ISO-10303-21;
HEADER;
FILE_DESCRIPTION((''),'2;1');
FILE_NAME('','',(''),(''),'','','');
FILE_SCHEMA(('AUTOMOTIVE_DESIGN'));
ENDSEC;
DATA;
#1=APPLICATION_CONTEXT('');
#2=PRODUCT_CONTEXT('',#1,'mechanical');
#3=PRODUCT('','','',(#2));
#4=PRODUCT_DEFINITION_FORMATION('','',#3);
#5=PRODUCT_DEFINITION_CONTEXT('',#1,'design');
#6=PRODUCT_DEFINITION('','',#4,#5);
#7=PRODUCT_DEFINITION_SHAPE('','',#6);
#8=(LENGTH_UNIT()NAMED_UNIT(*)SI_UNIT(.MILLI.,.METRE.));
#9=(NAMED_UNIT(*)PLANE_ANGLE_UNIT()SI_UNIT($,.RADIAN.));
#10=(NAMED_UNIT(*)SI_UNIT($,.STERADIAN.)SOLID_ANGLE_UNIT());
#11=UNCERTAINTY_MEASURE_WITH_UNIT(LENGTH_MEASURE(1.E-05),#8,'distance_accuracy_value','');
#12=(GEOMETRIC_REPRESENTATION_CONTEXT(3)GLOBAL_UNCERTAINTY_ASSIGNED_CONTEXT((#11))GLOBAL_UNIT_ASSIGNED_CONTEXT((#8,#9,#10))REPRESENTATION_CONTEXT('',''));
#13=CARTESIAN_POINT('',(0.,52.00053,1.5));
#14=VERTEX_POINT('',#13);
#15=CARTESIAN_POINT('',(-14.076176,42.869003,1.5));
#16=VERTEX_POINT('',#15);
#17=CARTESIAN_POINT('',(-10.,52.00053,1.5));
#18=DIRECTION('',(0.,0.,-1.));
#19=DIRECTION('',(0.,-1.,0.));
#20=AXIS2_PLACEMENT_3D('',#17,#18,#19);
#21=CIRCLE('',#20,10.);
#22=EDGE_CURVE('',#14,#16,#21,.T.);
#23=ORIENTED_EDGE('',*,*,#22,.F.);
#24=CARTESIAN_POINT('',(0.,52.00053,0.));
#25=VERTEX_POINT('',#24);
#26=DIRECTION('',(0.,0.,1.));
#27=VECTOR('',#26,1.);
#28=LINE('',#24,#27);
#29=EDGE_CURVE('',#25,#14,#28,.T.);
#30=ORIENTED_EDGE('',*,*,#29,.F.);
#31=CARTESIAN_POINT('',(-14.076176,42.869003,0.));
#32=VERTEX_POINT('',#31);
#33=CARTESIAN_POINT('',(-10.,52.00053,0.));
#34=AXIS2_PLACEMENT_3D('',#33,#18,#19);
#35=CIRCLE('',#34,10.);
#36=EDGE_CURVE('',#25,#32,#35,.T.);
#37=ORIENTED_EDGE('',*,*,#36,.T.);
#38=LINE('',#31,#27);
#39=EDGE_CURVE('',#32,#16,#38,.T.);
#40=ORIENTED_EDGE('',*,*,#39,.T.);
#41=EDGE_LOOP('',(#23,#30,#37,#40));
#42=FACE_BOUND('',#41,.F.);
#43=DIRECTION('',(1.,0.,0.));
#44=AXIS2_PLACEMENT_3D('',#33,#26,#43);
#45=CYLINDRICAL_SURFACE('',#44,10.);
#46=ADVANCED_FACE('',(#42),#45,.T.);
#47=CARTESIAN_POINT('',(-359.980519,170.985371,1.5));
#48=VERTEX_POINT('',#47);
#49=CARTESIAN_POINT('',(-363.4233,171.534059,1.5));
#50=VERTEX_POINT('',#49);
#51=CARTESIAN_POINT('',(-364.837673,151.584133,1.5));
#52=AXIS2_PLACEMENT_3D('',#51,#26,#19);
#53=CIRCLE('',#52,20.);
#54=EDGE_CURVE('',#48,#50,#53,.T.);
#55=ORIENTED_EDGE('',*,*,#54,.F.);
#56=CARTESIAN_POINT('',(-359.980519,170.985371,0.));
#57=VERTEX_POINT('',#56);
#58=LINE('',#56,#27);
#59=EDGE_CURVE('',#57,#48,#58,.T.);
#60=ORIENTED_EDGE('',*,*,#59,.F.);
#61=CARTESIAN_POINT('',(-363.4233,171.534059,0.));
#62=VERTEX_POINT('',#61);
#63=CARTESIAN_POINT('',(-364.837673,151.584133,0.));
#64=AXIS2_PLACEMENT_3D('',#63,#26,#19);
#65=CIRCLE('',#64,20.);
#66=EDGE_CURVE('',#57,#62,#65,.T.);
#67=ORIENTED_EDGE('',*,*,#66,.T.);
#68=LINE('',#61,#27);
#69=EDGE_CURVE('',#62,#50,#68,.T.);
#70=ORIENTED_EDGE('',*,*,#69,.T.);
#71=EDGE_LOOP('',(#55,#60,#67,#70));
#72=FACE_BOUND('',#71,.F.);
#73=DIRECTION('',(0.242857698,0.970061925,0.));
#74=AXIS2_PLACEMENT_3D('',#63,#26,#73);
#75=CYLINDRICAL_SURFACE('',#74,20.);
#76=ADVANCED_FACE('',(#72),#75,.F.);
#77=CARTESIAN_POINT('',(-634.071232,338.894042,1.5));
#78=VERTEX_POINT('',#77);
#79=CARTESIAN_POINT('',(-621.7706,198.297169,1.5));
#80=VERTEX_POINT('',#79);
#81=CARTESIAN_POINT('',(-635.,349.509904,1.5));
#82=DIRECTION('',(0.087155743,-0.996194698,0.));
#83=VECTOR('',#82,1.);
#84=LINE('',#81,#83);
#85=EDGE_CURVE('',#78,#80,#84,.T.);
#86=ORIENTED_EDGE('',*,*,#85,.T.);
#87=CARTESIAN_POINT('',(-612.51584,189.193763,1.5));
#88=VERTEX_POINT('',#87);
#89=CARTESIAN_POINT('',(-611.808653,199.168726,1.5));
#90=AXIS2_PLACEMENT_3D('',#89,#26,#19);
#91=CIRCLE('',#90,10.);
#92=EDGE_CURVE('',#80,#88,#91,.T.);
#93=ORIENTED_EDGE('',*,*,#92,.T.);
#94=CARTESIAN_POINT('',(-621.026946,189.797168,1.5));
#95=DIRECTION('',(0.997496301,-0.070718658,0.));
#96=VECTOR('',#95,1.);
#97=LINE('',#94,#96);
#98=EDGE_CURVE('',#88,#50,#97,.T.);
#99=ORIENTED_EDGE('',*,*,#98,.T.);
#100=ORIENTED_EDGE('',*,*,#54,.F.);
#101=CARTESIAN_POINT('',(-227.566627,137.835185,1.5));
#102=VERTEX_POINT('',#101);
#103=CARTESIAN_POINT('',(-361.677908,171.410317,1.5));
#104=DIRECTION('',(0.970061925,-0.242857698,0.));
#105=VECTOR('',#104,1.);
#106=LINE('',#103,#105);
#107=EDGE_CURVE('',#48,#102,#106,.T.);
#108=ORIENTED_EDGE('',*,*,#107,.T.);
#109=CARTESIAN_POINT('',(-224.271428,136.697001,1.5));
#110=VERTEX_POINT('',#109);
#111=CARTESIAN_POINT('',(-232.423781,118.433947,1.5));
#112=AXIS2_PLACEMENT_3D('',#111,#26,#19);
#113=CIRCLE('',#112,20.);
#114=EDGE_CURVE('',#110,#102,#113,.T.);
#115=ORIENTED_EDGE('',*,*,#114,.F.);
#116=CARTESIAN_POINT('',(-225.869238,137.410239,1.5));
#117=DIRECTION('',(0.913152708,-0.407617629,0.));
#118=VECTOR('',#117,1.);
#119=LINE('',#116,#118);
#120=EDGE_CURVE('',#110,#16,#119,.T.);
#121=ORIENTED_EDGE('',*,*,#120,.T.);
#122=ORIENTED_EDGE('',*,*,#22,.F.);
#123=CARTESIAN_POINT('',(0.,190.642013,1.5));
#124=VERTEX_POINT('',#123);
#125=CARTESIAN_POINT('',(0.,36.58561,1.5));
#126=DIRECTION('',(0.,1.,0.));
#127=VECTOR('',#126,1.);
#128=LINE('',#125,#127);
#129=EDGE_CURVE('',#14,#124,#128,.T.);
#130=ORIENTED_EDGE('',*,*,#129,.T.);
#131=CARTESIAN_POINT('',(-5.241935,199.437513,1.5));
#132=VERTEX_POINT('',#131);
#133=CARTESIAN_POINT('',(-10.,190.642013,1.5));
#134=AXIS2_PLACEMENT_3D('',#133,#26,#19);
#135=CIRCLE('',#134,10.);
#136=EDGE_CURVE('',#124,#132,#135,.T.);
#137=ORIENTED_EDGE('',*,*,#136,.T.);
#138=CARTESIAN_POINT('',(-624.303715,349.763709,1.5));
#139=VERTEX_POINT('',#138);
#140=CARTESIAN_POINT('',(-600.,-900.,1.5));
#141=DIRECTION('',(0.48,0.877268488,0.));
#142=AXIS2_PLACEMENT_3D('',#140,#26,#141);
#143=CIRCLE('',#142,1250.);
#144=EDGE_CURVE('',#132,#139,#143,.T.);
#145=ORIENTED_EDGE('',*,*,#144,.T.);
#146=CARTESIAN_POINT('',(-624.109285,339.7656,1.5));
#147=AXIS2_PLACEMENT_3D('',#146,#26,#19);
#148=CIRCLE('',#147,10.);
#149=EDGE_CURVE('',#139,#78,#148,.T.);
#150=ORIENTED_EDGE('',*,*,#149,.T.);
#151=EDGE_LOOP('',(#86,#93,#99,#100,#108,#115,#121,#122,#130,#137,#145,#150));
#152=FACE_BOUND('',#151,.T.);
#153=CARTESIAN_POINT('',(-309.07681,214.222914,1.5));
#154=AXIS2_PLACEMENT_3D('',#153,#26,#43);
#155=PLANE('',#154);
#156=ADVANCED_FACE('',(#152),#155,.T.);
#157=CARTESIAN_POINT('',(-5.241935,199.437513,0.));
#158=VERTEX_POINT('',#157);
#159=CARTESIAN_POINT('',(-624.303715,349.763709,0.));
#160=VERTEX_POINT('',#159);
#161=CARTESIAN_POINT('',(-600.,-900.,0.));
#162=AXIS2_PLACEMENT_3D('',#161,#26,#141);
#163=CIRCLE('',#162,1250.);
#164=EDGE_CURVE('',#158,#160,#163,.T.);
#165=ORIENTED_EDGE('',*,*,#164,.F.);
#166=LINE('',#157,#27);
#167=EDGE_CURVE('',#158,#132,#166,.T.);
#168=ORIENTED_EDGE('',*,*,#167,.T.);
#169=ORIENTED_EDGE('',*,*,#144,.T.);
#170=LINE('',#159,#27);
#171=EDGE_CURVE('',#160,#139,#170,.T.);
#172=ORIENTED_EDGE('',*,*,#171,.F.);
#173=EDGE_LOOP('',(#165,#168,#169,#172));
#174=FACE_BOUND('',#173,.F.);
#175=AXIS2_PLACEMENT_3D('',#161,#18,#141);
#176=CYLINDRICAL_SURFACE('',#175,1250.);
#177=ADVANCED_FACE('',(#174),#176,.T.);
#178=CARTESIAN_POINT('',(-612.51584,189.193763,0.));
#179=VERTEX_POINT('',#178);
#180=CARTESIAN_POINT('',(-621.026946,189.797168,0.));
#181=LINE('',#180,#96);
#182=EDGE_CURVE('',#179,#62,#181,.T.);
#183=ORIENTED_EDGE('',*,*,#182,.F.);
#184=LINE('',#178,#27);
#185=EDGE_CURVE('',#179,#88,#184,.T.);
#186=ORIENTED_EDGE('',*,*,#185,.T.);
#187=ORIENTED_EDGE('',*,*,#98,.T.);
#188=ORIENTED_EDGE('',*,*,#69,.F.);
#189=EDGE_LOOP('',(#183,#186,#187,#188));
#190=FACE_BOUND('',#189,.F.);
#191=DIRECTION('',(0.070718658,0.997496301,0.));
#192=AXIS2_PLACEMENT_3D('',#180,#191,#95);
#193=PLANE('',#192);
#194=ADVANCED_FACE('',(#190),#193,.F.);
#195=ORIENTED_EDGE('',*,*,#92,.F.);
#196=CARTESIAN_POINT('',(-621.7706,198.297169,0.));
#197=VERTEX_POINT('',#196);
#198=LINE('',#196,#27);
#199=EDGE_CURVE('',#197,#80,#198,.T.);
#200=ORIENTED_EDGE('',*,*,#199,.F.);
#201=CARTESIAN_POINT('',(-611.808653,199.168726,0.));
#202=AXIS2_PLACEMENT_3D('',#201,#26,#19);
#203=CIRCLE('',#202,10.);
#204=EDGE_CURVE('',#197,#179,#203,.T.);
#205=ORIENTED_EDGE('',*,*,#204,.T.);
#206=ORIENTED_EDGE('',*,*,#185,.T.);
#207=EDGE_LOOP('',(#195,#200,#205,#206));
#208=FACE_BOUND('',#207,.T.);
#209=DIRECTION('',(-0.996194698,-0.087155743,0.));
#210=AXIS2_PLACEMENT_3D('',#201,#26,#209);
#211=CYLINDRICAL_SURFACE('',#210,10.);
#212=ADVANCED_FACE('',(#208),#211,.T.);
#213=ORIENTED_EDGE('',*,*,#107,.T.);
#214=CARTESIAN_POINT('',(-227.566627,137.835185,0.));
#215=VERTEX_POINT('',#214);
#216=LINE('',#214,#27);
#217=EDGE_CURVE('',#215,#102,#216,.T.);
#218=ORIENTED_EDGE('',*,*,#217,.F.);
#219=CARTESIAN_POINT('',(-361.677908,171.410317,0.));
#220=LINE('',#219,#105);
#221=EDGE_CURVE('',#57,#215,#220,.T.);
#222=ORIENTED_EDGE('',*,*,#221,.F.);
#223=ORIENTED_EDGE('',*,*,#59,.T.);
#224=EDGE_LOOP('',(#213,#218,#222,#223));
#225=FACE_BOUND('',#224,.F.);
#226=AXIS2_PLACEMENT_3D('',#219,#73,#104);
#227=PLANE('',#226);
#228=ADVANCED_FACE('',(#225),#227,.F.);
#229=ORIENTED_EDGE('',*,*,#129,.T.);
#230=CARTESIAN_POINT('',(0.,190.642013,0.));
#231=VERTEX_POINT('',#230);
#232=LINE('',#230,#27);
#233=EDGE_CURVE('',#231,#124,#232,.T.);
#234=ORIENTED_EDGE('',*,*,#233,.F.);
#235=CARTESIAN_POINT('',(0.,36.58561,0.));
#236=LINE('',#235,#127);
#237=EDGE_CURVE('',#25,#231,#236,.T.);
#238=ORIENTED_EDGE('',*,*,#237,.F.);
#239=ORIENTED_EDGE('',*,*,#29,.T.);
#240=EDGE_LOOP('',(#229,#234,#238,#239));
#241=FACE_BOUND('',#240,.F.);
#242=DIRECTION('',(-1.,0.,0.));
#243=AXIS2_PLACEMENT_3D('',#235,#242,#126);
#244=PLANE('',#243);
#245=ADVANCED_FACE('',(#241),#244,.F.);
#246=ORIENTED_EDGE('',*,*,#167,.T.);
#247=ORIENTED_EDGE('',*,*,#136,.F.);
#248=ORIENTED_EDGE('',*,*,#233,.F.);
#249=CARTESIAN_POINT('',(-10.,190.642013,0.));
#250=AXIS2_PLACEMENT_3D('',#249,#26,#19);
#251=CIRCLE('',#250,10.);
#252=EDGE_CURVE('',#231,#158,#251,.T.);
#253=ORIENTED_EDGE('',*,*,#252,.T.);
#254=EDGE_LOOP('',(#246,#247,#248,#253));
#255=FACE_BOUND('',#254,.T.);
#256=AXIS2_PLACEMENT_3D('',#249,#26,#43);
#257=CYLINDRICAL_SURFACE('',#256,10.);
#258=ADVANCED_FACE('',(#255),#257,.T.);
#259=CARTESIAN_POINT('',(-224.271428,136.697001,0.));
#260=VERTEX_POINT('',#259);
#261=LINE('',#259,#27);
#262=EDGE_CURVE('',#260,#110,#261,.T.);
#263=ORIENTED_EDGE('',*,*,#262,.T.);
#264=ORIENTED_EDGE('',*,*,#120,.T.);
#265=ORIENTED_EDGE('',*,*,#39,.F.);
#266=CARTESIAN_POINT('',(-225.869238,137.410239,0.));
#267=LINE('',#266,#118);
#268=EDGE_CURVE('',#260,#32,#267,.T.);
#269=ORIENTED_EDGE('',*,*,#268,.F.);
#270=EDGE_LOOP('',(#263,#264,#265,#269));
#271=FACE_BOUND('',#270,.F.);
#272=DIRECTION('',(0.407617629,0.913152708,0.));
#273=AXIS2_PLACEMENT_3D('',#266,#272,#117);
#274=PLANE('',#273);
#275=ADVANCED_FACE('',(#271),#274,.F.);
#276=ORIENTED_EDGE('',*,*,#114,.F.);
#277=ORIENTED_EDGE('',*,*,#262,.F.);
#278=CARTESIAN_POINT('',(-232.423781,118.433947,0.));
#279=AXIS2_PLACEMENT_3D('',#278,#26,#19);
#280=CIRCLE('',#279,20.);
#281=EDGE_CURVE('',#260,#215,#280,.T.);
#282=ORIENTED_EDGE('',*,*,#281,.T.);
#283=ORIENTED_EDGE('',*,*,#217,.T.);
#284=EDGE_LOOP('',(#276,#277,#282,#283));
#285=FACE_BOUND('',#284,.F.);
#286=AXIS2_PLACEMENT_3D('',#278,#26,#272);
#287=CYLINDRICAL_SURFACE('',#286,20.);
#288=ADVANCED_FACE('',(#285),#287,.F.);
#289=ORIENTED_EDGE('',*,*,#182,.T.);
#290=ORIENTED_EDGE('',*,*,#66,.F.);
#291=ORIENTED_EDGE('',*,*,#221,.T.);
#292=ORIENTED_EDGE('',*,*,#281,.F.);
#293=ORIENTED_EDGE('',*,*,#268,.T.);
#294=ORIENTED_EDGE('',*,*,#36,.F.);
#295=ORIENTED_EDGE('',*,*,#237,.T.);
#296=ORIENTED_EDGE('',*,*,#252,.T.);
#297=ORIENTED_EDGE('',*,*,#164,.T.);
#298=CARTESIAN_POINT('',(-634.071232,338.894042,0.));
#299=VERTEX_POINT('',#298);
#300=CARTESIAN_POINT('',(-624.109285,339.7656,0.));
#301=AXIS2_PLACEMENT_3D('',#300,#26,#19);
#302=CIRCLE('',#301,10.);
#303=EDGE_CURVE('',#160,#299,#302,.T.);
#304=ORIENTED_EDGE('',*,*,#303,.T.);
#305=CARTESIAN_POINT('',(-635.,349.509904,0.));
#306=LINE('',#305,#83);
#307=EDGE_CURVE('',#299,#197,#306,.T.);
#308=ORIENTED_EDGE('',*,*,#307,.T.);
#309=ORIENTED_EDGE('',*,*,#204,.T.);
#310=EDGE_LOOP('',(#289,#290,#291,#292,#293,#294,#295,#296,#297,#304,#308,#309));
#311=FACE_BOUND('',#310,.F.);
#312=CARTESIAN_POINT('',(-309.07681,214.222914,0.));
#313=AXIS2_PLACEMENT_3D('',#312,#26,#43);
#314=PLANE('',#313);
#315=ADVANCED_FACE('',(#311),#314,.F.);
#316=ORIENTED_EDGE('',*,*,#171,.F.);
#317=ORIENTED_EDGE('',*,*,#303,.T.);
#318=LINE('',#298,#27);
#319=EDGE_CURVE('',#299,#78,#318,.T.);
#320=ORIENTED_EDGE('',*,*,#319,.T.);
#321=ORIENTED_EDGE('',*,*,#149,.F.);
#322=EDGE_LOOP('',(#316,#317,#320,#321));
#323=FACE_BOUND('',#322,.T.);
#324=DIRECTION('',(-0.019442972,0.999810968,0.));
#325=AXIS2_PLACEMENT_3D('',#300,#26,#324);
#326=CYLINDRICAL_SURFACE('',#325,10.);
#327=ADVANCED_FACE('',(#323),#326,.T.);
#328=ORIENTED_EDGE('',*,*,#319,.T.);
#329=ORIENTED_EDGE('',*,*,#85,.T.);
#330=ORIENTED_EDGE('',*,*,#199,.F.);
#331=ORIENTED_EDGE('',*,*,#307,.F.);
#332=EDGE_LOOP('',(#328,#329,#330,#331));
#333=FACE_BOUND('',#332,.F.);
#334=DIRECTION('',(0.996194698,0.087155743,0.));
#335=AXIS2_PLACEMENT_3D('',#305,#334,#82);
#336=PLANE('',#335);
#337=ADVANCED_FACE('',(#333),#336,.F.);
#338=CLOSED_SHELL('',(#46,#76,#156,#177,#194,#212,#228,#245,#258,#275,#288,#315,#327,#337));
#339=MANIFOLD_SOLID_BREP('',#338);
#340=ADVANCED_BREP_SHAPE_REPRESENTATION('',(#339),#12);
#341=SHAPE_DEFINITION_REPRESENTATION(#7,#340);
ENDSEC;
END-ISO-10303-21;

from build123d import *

# Parameters (mm, degrees)
F1_DEPTH = 1.5
F2_R     = 10
F3_R     = 20


with BuildPart() as f1:
    # F0 (on Top) → F1 (new body)
    with BuildSketch(Plane.XY):
        with BuildLine():
            Line((0, 36.5856099731), (0, 196.5856099731))
            ThreePointArc((0, 196.5856099731), (-307.3351576975, 315.2560594706), (-635, 349.5099039223))
            Line((-635, 349.5099039223), (-621.0269461922, 189.7971680702))
            Line((-621.0269461922, 189.7971680702), (-361.6779078132, 171.4103170113))
            Line((-361.6779078132, 171.4103170113), (-225.8692382849, 137.4102393502))
            Line((-225.8692382849, 137.4102393502), (0, 36.5856099731))
        make_face()
    extrude(amount=F1_DEPTH)

    # F2
    f2_edges = [f1.edges().sort_by_distance(p)[0] for p in [
        (0, 196.58561, 0.75),
        (-635, 349.509904, 0.75),
        (-621.026946, 189.797168, 0.75),
        (0, 36.58561, 0.75),
    ]]
    fillet(f2_edges, radius=F2_R)

    # F3
    f3_edges = [f1.edges().sort_by_distance(p)[0] for p in [
        (-361.677908, 171.410317, 0.75),
        (-225.869238, 137.410239, 0.75),
    ]]
    fillet(f3_edges, radius=F3_R)


solid = f1.part
